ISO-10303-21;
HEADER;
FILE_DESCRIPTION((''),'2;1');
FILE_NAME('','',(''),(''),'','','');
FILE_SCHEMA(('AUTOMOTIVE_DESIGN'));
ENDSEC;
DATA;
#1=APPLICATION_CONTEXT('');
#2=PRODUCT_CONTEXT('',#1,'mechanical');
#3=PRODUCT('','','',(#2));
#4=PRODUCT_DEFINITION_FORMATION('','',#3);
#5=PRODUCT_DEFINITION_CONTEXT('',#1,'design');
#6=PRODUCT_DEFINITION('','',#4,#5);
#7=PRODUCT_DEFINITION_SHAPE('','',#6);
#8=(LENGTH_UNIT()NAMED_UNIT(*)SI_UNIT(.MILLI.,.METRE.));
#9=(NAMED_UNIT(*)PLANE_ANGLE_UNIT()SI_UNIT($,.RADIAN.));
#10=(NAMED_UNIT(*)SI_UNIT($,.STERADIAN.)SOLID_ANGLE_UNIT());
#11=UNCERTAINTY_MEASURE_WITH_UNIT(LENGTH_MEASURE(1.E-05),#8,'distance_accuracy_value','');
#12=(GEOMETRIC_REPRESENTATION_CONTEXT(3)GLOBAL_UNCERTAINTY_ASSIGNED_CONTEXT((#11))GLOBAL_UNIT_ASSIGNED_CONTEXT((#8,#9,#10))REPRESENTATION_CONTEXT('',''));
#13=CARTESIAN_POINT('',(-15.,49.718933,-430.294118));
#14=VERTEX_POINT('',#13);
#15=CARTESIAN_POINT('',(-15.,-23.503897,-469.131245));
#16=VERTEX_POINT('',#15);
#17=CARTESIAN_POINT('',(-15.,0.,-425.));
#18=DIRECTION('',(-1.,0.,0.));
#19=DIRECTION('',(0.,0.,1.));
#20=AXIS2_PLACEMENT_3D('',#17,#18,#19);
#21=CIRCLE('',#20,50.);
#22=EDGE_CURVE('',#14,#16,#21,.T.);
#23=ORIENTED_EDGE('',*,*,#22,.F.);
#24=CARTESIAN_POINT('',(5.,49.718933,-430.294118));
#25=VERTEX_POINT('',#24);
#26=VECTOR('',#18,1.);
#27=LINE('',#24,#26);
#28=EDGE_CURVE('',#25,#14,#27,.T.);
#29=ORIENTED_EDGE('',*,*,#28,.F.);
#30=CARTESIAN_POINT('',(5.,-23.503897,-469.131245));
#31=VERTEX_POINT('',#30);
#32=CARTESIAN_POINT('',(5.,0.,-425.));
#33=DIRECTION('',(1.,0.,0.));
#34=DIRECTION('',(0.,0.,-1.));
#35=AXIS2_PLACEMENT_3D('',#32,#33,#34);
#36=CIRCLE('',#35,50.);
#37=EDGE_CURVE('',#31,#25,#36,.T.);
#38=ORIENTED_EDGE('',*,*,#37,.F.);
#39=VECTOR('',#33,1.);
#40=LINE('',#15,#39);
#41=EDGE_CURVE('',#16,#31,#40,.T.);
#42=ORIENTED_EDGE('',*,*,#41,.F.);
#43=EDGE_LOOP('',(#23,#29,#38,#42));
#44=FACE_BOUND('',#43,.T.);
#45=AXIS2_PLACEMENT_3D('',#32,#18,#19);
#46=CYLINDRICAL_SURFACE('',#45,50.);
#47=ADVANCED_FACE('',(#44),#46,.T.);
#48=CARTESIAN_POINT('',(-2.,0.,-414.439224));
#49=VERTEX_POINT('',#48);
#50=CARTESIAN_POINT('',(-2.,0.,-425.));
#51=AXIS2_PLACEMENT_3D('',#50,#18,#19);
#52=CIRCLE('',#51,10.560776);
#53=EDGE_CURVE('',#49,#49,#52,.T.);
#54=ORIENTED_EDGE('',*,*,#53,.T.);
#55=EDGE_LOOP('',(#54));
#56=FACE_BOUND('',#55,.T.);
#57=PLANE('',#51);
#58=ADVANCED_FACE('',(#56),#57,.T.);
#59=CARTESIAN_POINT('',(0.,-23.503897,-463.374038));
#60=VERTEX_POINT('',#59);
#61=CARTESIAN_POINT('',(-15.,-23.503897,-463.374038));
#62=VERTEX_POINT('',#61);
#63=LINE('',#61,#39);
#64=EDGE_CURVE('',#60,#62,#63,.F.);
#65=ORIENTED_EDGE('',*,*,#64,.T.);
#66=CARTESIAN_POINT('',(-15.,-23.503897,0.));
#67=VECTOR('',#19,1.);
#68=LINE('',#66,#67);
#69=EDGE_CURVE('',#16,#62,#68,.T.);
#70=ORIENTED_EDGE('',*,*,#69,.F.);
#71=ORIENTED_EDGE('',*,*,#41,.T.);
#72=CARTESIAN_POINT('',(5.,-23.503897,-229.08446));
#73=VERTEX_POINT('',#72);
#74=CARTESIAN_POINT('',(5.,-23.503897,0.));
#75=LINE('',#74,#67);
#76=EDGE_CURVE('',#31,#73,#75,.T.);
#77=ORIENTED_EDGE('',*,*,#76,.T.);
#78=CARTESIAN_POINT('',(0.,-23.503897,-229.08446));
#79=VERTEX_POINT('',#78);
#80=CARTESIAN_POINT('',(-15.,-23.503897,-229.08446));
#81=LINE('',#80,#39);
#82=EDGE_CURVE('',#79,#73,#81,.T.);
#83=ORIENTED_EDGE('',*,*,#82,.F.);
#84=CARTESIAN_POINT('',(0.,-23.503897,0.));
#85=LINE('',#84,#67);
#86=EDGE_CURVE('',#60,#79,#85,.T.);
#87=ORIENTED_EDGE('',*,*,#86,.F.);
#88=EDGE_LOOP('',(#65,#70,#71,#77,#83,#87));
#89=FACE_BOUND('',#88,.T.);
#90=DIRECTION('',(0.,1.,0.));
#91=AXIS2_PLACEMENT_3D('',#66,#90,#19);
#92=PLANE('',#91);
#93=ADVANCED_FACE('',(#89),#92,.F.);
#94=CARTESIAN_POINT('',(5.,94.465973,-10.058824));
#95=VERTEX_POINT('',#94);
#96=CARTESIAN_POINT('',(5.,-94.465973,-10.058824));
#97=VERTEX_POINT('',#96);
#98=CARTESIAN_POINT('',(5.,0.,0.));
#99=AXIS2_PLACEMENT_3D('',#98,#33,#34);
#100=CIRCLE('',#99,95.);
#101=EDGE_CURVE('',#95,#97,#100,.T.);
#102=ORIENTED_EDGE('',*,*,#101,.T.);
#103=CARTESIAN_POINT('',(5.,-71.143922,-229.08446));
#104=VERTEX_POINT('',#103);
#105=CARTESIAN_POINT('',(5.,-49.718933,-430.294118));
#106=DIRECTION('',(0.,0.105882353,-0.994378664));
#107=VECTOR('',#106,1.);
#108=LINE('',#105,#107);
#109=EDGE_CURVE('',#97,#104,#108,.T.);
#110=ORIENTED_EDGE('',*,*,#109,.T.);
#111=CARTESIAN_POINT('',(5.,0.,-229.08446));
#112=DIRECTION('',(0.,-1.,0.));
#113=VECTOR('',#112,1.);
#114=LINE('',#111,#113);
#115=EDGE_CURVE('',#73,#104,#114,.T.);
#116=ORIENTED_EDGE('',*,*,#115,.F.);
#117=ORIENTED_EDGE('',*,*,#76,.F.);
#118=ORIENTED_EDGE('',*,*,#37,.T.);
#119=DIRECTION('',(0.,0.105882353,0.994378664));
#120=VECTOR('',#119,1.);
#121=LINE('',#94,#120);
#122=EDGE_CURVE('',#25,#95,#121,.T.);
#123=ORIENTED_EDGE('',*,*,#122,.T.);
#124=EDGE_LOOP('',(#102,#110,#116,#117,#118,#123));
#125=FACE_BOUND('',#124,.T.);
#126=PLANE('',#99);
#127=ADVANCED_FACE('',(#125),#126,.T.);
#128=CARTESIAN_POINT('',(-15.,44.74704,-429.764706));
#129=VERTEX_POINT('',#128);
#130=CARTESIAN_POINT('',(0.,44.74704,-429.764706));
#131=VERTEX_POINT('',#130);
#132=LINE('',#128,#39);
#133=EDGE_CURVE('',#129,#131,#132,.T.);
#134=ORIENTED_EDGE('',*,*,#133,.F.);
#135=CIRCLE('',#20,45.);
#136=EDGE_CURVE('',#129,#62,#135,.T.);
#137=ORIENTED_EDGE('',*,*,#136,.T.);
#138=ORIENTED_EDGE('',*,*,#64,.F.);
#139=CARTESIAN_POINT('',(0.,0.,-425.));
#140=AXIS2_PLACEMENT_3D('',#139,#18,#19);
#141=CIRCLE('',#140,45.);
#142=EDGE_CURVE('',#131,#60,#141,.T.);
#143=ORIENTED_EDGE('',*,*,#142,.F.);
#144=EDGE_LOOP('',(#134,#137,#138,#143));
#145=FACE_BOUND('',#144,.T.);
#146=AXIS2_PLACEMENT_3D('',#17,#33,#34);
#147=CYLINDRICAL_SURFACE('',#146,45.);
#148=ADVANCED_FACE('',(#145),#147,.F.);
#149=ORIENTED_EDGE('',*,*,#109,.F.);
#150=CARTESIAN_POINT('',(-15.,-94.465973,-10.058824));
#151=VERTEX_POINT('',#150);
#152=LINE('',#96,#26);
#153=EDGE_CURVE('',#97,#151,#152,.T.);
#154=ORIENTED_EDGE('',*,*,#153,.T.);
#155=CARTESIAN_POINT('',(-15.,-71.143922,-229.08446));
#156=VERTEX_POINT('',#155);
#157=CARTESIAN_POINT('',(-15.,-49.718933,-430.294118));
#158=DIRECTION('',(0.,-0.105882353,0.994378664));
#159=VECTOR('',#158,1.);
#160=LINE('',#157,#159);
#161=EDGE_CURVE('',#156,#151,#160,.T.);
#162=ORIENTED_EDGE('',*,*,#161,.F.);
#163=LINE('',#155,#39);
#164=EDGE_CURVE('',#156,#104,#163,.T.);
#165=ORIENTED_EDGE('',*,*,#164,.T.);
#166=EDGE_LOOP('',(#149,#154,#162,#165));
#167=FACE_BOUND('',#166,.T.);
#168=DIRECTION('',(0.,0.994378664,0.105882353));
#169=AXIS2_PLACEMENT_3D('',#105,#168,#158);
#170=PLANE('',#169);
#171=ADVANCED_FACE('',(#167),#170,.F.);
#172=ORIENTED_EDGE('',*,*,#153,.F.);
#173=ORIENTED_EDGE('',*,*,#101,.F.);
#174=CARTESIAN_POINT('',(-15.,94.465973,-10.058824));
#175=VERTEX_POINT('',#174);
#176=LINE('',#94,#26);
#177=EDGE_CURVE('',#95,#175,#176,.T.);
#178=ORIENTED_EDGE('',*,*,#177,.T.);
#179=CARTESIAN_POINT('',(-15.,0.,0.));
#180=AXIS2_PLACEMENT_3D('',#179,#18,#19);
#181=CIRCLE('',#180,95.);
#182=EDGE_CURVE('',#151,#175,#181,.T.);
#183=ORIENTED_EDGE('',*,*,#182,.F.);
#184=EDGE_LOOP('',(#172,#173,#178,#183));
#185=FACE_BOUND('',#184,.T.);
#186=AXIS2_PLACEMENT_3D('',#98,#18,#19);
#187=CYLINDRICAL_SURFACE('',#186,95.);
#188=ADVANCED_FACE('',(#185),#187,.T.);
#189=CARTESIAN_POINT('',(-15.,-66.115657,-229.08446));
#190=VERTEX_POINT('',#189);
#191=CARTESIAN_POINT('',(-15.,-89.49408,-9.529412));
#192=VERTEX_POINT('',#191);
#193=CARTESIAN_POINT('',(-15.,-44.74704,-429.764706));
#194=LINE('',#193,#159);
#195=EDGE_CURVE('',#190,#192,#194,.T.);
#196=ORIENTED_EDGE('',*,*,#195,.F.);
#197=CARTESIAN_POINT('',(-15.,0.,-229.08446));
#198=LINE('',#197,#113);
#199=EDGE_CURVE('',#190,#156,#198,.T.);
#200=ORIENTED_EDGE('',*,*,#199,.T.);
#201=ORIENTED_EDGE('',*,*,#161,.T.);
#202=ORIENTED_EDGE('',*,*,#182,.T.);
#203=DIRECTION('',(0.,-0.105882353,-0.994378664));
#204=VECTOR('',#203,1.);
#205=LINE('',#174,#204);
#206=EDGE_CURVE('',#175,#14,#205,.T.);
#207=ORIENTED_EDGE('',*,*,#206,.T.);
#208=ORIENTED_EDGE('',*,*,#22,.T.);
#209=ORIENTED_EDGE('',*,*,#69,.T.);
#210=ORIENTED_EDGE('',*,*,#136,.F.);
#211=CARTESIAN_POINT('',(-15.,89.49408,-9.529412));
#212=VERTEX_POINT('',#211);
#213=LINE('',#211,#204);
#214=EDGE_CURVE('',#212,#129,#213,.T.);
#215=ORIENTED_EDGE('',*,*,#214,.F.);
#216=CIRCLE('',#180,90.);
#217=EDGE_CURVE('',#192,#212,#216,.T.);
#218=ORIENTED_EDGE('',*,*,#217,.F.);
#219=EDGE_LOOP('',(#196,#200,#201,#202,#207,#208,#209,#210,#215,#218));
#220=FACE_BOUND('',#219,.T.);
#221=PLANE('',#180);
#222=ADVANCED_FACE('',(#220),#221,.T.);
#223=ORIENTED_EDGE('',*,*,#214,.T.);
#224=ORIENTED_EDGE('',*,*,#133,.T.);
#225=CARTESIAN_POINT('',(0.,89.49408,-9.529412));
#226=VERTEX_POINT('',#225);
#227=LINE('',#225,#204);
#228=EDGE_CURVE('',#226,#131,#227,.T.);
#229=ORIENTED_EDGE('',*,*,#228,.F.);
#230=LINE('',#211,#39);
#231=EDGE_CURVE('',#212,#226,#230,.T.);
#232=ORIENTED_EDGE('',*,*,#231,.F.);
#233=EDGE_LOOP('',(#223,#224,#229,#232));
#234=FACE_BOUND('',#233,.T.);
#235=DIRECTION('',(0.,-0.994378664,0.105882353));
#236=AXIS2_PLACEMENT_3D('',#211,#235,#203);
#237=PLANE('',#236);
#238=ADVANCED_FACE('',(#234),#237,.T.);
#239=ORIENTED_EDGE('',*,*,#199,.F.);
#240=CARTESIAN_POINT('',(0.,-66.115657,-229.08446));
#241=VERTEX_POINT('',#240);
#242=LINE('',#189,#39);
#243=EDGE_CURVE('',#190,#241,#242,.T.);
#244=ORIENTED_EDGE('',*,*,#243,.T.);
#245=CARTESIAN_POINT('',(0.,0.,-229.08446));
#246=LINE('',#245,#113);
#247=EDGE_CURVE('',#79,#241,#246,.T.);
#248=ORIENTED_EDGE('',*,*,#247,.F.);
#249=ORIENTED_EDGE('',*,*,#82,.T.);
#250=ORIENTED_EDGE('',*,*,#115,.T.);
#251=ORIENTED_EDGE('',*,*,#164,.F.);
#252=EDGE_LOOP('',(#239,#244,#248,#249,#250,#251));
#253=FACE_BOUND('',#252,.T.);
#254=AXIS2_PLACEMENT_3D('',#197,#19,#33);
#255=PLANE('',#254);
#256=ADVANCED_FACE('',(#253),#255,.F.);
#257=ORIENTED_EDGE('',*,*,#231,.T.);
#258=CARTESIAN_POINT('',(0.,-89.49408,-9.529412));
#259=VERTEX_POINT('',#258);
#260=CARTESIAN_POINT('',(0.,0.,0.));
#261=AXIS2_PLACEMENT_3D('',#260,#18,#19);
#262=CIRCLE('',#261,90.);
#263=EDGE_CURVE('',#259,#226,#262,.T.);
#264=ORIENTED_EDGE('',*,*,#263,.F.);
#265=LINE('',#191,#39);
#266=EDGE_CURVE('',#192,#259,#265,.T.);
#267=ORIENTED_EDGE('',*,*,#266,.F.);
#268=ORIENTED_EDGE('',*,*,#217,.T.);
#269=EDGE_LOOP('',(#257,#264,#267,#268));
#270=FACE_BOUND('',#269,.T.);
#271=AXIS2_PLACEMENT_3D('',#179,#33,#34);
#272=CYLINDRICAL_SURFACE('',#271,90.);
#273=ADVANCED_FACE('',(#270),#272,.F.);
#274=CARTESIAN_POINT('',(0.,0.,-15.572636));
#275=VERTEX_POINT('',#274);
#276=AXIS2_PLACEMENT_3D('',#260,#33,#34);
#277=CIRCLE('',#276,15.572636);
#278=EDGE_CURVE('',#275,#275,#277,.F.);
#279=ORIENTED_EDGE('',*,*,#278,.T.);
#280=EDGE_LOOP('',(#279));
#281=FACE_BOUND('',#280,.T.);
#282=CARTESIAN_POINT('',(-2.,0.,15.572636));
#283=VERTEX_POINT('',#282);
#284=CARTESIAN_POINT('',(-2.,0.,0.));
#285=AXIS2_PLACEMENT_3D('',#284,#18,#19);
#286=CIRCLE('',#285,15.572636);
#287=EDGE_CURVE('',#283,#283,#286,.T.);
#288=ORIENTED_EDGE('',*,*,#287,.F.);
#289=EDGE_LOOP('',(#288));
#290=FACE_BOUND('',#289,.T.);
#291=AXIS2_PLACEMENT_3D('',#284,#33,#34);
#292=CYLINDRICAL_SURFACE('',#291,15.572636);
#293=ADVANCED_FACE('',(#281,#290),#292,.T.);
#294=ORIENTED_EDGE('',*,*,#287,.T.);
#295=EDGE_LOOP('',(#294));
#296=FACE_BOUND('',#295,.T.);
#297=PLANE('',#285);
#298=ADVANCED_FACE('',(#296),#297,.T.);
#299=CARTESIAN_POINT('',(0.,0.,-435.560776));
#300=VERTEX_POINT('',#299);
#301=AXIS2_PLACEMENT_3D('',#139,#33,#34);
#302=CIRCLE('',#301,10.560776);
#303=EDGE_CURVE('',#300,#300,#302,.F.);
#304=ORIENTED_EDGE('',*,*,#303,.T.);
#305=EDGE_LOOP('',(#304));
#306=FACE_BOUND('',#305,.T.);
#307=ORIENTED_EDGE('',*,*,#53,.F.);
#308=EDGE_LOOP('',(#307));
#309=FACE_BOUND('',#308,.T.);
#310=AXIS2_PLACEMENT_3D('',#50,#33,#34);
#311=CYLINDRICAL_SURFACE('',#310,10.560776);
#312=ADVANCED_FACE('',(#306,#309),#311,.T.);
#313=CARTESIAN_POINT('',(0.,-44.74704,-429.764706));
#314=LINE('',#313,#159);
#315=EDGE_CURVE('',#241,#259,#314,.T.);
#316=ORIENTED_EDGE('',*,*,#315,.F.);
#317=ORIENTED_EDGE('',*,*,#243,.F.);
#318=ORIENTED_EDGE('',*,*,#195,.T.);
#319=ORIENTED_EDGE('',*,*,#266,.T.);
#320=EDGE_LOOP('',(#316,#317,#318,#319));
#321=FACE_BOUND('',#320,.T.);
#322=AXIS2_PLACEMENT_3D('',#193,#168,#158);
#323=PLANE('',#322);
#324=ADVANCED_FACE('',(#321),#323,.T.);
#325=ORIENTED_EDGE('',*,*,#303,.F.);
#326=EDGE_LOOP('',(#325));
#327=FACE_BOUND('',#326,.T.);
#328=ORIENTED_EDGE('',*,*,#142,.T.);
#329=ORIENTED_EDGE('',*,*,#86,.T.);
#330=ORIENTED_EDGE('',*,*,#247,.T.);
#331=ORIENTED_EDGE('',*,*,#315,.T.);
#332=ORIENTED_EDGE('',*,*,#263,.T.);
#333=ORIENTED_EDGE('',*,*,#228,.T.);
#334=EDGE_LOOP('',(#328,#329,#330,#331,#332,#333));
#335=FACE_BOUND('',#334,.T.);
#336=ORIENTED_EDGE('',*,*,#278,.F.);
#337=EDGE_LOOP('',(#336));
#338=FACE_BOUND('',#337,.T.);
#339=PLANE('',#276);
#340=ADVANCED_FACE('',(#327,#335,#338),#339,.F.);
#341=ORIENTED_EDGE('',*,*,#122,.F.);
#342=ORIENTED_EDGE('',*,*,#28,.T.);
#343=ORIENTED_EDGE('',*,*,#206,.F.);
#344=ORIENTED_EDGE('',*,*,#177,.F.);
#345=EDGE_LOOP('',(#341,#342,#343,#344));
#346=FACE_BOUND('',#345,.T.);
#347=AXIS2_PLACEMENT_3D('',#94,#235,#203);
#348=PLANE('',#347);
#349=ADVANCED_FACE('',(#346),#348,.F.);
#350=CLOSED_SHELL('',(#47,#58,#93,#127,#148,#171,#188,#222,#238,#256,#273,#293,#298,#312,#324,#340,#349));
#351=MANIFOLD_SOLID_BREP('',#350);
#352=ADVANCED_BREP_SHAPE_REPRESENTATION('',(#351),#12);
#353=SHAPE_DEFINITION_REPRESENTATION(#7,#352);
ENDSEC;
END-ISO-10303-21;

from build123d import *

# Parameters (mm, degrees)
DODANIE_WYCI_GNI_CIE1_DEPTH = 5
DODANIE_WYCI_GNI_CIE2_START = 15
DODANIE_WYCI_GNI_CIE2_DEPTH = 15
SZKIC3_R                    = 10.56077606
SZKIC3_R_2                  = 15.572635527
DODANIE_WYCI_GNI_CIE3_DEPTH = 2
WYTNIJ_WYCI_GNI_CIE1_START  = -20
WYTNIJ_WYCI_GNI_CIE1_DEPTH  = 20


with BuildPart() as part:
    # Szkic1 → Dodanie-wyciągnięcie1 (new body)
    with BuildSketch(Plane(origin=(0, 0, 0), x_dir=(0, 0, -1), z_dir=(1, 0, 0))):
        with BuildLine():
            Line((10.058823529, 94.465973076), (430.294117647, 49.718933198))
            ThreePointArc((430.294117647, 49.718933198), (475, 0), (430.294117647, -49.718933198))
            Line((430.294117647, -49.718933198), (10.058823529, -94.465973076))
            ThreePointArc((10.058823529, -94.465973076), (-95, 0), (10.058823529, 94.465973076))
        make_face()
    extrude(amount=DODANIE_WYCI_GNI_CIE1_DEPTH)

    # Szkic2 → Dodanie-wyciągnięcie2 (add)
    with BuildSketch(Plane.ZY.offset(DODANIE_WYCI_GNI_CIE2_START)):
        with BuildLine():
            Line((-10.058823529, 94.465973076), (-430.294117647, 49.718933198))
            ThreePointArc((-430.294117647, 49.718933198), (-475, 0), (-430.294117647, -49.718933198))
            Line((-430.294117647, -49.718933198), (-10.058823529, -94.465973076))
            ThreePointArc((-10.058823529, -94.465973076), (95, 0), (-10.058823529, 94.465973076))
        make_face()
        with BuildLine():
            Line((-9.529411765, 89.494079756), (-429.764705882, 44.747039878))
            ThreePointArc((-429.764705882, 44.747039878), (-470, 0), (-429.764705882, -44.747039878))
            Line((-429.764705882, -44.747039878), (-9.529411765, -89.494079756))
            ThreePointArc((-9.529411765, -89.494079756), (90, 0), (-9.529411765, 89.494079756))
        make_face(mode=Mode.SUBTRACT)
    extrude(amount=-DODANIE_WYCI_GNI_CIE2_DEPTH)

    # Szkic3 → Dodanie-wyciągnięcie3 (add)
    with BuildSketch(Plane.ZY):
        with Locations((-425, 0)):
            Circle(SZKIC3_R)
        Circle(SZKIC3_R_2)
    extrude(amount=DODANIE_WYCI_GNI_CIE3_DEPTH)

    # Szkic4 → Wytnij-wyciągnięcie1 (cut)
    with BuildSketch(Plane(origin=(5, 0, 0), x_dir=(0, 0, -1), z_dir=(1, 0, 0)).offset(WYTNIJ_WYCI_GNI_CIE1_START)):
        with BuildLine():
            ThreePointArc((430.294117647, -49.718933198), (452.973624228, -41.442446206), (469.131245302, -23.503897297))
            Line((469.131245302, -23.503897297), (229.084460246, -23.503897297))
            Line((229.084460246, -23.503897297), (229.084460246, -71.143922221))
            Line((229.084460246, -71.143922221), (430.294117647, -49.718933198))
        make_face()
    extrude(amount=WYTNIJ_WYCI_GNI_CIE1_DEPTH, mode=Mode.SUBTRACT)


solid = part.part
